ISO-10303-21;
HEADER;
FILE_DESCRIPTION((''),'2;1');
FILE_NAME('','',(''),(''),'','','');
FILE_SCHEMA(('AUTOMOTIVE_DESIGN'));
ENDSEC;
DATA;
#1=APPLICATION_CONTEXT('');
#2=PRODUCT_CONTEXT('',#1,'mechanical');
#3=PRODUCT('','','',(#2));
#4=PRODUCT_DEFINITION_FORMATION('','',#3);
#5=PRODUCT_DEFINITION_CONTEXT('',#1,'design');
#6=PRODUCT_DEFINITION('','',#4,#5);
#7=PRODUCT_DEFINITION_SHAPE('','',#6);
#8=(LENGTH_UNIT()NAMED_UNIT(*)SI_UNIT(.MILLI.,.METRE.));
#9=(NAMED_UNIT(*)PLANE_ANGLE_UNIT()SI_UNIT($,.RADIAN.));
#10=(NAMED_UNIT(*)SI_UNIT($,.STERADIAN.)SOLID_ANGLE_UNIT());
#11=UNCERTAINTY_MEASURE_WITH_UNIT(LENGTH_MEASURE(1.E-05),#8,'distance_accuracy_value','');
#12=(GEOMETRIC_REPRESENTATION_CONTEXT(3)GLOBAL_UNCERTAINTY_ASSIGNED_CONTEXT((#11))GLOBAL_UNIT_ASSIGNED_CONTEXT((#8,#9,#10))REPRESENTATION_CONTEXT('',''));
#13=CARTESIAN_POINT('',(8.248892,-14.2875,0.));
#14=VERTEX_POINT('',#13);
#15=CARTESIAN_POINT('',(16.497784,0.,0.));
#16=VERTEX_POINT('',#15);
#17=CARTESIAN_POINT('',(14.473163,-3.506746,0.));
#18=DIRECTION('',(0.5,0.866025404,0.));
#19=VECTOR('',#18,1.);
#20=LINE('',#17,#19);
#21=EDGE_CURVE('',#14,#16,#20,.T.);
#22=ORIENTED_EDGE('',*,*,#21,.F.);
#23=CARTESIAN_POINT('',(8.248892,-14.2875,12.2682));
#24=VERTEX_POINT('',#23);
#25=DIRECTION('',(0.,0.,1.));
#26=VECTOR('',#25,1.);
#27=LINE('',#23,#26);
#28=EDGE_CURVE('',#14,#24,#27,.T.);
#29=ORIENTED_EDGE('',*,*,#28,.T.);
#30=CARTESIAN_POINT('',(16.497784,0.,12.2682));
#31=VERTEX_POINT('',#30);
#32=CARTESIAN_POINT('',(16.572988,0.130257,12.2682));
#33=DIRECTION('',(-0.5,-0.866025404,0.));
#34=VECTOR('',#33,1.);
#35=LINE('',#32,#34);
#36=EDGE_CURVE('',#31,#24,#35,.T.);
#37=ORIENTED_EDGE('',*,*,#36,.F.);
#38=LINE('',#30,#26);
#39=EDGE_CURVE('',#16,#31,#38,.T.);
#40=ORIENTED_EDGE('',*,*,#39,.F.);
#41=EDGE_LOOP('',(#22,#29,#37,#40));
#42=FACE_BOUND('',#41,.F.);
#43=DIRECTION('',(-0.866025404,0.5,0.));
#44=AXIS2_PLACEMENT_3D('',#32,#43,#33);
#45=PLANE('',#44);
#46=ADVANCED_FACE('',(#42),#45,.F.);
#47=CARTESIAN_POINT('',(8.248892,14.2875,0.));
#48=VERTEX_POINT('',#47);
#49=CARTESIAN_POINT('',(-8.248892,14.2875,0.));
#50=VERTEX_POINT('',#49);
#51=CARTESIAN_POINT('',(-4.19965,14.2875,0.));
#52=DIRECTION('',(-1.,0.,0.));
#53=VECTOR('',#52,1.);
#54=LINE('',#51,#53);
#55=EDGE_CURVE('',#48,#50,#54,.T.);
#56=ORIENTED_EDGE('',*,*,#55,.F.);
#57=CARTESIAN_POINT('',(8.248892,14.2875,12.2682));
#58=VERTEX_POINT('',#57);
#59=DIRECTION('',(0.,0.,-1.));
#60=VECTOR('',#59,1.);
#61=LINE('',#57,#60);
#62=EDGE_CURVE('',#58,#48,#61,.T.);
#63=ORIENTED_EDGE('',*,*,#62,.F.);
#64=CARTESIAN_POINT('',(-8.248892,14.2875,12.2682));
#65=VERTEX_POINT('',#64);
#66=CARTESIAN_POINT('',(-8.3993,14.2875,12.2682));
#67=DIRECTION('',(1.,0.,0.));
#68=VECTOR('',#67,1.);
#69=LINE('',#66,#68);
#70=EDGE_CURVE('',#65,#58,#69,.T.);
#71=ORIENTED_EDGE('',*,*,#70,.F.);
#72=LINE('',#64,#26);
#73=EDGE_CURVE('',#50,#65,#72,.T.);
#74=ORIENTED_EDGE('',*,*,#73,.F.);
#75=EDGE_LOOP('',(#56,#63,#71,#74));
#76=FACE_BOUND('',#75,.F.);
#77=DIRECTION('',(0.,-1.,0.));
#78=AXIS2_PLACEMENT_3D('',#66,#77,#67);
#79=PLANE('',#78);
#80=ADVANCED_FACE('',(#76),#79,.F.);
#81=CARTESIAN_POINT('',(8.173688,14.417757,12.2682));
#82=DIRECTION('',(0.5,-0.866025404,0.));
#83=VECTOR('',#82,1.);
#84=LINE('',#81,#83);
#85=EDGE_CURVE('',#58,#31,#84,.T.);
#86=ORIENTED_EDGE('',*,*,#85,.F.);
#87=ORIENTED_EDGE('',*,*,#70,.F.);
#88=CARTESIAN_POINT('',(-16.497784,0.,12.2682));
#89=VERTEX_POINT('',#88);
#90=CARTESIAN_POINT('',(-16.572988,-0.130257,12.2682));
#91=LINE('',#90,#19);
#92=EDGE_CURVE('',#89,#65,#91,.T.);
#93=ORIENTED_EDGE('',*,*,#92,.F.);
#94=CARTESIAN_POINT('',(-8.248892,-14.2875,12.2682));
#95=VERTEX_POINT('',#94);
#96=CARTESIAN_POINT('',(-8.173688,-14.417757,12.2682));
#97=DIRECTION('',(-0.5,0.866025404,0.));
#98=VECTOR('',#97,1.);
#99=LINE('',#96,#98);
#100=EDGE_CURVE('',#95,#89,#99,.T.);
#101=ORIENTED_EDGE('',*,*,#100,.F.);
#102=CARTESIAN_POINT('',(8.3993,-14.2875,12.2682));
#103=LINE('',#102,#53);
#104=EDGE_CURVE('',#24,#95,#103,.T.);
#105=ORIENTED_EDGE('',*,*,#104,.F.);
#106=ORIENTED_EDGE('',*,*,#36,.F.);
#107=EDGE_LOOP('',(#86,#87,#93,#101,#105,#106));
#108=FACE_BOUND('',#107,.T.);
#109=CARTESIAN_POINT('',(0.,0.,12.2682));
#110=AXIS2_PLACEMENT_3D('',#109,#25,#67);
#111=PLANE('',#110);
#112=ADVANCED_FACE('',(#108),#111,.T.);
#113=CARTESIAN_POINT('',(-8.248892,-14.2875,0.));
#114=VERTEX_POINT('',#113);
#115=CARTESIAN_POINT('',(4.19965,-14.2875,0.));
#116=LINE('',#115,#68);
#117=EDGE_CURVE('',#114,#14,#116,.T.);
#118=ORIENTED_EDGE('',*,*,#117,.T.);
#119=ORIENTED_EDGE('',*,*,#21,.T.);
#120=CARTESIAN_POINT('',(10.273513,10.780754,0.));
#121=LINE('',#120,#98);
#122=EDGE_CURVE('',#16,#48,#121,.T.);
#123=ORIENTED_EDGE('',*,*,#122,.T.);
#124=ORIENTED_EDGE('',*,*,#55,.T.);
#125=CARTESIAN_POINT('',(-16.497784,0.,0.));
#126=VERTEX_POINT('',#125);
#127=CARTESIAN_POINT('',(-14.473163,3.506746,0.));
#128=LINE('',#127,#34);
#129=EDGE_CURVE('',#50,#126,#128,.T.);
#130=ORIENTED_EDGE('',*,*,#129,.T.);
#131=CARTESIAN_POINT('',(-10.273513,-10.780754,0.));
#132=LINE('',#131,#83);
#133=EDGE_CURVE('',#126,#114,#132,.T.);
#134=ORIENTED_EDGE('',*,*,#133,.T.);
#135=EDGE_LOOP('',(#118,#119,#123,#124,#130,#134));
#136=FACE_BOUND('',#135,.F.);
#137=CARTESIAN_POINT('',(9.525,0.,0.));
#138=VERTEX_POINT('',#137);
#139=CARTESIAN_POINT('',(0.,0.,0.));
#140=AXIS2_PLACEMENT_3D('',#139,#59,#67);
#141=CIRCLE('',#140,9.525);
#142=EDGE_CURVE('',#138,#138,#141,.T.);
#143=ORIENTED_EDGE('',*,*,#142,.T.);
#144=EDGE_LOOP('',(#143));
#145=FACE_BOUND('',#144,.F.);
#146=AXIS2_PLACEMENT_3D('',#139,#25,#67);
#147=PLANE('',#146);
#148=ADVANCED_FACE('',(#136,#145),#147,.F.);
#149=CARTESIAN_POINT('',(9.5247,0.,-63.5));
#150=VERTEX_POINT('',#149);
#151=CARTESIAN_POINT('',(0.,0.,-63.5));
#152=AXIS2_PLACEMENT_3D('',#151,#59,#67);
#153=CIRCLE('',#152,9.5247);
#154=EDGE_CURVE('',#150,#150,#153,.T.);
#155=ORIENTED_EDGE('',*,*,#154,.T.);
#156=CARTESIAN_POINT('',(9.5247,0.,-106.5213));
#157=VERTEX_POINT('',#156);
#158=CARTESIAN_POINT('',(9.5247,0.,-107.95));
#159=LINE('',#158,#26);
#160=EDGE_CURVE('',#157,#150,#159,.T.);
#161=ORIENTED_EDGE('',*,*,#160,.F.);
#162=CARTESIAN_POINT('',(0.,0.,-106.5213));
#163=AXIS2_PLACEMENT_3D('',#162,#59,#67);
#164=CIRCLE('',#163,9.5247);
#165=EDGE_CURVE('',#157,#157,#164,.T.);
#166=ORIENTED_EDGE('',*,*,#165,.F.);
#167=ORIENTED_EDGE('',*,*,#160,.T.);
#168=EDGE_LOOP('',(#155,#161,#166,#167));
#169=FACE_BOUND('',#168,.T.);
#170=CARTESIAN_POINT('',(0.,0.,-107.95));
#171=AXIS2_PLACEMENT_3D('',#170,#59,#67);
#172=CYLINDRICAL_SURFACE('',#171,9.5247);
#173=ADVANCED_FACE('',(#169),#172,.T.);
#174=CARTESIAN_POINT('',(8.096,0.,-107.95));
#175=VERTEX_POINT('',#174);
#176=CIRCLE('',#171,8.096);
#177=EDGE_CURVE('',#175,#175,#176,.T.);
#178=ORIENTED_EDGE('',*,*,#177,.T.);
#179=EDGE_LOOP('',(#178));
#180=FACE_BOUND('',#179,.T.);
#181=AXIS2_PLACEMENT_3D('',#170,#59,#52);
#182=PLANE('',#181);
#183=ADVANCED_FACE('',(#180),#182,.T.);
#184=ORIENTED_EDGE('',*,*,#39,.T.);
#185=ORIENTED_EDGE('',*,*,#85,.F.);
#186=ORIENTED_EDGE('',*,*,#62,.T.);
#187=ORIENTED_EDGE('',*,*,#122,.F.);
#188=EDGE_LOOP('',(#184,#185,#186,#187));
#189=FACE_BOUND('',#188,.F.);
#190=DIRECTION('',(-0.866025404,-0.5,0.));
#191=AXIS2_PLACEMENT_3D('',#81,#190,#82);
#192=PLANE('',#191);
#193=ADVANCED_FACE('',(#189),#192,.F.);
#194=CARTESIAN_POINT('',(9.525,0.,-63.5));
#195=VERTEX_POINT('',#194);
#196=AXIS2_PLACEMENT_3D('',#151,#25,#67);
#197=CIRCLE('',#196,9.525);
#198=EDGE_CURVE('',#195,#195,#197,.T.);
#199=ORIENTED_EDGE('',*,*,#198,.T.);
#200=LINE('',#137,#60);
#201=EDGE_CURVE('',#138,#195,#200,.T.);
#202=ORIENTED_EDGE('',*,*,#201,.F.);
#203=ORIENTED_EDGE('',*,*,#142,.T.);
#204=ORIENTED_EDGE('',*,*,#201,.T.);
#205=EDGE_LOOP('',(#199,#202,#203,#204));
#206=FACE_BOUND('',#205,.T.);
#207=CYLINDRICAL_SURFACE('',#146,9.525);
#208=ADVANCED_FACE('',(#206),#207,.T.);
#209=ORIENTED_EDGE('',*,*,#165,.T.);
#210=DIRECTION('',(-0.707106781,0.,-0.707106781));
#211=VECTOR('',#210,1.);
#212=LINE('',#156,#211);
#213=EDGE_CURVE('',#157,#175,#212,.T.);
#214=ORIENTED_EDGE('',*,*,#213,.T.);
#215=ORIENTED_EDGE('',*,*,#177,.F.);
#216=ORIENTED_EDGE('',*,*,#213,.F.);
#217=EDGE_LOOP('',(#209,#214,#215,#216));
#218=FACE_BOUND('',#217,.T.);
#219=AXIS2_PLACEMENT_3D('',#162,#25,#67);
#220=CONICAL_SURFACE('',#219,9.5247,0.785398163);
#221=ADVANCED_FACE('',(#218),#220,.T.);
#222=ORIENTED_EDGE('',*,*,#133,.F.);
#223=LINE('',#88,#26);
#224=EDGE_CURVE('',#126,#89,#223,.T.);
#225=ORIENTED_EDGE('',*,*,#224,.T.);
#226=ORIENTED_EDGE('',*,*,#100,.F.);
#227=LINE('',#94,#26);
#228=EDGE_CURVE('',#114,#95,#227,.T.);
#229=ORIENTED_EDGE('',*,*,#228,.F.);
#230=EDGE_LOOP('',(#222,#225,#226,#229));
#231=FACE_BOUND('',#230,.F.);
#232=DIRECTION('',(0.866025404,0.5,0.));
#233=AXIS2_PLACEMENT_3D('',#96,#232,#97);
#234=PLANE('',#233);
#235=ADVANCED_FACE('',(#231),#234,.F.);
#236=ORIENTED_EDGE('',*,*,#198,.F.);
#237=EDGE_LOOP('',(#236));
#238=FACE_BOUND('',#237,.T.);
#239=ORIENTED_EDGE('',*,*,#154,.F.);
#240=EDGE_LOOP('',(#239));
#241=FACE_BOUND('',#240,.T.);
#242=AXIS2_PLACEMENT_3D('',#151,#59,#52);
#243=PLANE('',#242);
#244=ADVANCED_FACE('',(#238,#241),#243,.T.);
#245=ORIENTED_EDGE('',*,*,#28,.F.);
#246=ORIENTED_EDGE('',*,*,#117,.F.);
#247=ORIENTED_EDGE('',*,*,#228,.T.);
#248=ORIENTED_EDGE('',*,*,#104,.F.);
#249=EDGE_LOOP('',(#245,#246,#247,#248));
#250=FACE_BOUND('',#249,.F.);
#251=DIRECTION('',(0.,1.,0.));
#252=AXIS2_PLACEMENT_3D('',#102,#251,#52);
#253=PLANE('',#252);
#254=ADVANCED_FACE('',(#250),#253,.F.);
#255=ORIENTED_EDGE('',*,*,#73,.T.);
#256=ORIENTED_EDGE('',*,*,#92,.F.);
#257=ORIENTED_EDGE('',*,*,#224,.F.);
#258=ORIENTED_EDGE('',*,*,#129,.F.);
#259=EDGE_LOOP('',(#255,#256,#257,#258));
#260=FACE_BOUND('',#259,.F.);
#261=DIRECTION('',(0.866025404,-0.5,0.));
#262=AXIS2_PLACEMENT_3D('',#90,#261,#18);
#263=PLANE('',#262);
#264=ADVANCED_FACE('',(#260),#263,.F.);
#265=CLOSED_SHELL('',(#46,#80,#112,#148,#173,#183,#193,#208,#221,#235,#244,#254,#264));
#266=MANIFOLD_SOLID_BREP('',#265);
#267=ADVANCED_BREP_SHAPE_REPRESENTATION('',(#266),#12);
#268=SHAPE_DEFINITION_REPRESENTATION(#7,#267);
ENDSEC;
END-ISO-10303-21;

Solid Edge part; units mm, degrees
sketch "Sketch1" plane through (0, 0, 0) normal (0, 0, 1) x (1, 0, 0)
  circle A0 centre (0, 0) radius 16.5735
  dimension "D1" = 33.147
extrude "Protrusion1" add sketch "Sketch1" along normal blind 12.2682
sketch "Sketch2" plane through (0, 0, 0) normal (0, 0, -1) x (1, 0, 0)
  circle A0 centre (0, 0) radius 9.525
extrude "Protrusion2" add sketch "Sketch2" along normal blind 107.95
sketch "Sketch3" plane through (0, 0, -107.95) normal (0, 0, -1) x (1, 0, 0)
  circle A0 centre (0, 0) radius 9.5247
extrude "Cutout1" cut sketch "Sketch3" against normal blind 44.45 flip side to cut
chamfer "Chamfer_1" distance 1.4287 angle 45 1 edges at (-9.5247, 0, -107.95)
sketch "Sketch4" plane through (0, 0, 12.2682) normal (0, 0, 1) x (1, 0, 0)
  line L0 (-8.3993, 14.2875) -> (8.3993, 14.2875)
  dimension "D1" = 28.575
extrude "Cutout2" cut sketch "Sketch4" against normal up to next material side at (0, 14.3375, 12.2682)
pattern_circular "Pattern1" count 6 over 360 about axis through (0, 0, 12.2682) along (0, 0, 1) of "Cutout2"
properties part number "24107086"
